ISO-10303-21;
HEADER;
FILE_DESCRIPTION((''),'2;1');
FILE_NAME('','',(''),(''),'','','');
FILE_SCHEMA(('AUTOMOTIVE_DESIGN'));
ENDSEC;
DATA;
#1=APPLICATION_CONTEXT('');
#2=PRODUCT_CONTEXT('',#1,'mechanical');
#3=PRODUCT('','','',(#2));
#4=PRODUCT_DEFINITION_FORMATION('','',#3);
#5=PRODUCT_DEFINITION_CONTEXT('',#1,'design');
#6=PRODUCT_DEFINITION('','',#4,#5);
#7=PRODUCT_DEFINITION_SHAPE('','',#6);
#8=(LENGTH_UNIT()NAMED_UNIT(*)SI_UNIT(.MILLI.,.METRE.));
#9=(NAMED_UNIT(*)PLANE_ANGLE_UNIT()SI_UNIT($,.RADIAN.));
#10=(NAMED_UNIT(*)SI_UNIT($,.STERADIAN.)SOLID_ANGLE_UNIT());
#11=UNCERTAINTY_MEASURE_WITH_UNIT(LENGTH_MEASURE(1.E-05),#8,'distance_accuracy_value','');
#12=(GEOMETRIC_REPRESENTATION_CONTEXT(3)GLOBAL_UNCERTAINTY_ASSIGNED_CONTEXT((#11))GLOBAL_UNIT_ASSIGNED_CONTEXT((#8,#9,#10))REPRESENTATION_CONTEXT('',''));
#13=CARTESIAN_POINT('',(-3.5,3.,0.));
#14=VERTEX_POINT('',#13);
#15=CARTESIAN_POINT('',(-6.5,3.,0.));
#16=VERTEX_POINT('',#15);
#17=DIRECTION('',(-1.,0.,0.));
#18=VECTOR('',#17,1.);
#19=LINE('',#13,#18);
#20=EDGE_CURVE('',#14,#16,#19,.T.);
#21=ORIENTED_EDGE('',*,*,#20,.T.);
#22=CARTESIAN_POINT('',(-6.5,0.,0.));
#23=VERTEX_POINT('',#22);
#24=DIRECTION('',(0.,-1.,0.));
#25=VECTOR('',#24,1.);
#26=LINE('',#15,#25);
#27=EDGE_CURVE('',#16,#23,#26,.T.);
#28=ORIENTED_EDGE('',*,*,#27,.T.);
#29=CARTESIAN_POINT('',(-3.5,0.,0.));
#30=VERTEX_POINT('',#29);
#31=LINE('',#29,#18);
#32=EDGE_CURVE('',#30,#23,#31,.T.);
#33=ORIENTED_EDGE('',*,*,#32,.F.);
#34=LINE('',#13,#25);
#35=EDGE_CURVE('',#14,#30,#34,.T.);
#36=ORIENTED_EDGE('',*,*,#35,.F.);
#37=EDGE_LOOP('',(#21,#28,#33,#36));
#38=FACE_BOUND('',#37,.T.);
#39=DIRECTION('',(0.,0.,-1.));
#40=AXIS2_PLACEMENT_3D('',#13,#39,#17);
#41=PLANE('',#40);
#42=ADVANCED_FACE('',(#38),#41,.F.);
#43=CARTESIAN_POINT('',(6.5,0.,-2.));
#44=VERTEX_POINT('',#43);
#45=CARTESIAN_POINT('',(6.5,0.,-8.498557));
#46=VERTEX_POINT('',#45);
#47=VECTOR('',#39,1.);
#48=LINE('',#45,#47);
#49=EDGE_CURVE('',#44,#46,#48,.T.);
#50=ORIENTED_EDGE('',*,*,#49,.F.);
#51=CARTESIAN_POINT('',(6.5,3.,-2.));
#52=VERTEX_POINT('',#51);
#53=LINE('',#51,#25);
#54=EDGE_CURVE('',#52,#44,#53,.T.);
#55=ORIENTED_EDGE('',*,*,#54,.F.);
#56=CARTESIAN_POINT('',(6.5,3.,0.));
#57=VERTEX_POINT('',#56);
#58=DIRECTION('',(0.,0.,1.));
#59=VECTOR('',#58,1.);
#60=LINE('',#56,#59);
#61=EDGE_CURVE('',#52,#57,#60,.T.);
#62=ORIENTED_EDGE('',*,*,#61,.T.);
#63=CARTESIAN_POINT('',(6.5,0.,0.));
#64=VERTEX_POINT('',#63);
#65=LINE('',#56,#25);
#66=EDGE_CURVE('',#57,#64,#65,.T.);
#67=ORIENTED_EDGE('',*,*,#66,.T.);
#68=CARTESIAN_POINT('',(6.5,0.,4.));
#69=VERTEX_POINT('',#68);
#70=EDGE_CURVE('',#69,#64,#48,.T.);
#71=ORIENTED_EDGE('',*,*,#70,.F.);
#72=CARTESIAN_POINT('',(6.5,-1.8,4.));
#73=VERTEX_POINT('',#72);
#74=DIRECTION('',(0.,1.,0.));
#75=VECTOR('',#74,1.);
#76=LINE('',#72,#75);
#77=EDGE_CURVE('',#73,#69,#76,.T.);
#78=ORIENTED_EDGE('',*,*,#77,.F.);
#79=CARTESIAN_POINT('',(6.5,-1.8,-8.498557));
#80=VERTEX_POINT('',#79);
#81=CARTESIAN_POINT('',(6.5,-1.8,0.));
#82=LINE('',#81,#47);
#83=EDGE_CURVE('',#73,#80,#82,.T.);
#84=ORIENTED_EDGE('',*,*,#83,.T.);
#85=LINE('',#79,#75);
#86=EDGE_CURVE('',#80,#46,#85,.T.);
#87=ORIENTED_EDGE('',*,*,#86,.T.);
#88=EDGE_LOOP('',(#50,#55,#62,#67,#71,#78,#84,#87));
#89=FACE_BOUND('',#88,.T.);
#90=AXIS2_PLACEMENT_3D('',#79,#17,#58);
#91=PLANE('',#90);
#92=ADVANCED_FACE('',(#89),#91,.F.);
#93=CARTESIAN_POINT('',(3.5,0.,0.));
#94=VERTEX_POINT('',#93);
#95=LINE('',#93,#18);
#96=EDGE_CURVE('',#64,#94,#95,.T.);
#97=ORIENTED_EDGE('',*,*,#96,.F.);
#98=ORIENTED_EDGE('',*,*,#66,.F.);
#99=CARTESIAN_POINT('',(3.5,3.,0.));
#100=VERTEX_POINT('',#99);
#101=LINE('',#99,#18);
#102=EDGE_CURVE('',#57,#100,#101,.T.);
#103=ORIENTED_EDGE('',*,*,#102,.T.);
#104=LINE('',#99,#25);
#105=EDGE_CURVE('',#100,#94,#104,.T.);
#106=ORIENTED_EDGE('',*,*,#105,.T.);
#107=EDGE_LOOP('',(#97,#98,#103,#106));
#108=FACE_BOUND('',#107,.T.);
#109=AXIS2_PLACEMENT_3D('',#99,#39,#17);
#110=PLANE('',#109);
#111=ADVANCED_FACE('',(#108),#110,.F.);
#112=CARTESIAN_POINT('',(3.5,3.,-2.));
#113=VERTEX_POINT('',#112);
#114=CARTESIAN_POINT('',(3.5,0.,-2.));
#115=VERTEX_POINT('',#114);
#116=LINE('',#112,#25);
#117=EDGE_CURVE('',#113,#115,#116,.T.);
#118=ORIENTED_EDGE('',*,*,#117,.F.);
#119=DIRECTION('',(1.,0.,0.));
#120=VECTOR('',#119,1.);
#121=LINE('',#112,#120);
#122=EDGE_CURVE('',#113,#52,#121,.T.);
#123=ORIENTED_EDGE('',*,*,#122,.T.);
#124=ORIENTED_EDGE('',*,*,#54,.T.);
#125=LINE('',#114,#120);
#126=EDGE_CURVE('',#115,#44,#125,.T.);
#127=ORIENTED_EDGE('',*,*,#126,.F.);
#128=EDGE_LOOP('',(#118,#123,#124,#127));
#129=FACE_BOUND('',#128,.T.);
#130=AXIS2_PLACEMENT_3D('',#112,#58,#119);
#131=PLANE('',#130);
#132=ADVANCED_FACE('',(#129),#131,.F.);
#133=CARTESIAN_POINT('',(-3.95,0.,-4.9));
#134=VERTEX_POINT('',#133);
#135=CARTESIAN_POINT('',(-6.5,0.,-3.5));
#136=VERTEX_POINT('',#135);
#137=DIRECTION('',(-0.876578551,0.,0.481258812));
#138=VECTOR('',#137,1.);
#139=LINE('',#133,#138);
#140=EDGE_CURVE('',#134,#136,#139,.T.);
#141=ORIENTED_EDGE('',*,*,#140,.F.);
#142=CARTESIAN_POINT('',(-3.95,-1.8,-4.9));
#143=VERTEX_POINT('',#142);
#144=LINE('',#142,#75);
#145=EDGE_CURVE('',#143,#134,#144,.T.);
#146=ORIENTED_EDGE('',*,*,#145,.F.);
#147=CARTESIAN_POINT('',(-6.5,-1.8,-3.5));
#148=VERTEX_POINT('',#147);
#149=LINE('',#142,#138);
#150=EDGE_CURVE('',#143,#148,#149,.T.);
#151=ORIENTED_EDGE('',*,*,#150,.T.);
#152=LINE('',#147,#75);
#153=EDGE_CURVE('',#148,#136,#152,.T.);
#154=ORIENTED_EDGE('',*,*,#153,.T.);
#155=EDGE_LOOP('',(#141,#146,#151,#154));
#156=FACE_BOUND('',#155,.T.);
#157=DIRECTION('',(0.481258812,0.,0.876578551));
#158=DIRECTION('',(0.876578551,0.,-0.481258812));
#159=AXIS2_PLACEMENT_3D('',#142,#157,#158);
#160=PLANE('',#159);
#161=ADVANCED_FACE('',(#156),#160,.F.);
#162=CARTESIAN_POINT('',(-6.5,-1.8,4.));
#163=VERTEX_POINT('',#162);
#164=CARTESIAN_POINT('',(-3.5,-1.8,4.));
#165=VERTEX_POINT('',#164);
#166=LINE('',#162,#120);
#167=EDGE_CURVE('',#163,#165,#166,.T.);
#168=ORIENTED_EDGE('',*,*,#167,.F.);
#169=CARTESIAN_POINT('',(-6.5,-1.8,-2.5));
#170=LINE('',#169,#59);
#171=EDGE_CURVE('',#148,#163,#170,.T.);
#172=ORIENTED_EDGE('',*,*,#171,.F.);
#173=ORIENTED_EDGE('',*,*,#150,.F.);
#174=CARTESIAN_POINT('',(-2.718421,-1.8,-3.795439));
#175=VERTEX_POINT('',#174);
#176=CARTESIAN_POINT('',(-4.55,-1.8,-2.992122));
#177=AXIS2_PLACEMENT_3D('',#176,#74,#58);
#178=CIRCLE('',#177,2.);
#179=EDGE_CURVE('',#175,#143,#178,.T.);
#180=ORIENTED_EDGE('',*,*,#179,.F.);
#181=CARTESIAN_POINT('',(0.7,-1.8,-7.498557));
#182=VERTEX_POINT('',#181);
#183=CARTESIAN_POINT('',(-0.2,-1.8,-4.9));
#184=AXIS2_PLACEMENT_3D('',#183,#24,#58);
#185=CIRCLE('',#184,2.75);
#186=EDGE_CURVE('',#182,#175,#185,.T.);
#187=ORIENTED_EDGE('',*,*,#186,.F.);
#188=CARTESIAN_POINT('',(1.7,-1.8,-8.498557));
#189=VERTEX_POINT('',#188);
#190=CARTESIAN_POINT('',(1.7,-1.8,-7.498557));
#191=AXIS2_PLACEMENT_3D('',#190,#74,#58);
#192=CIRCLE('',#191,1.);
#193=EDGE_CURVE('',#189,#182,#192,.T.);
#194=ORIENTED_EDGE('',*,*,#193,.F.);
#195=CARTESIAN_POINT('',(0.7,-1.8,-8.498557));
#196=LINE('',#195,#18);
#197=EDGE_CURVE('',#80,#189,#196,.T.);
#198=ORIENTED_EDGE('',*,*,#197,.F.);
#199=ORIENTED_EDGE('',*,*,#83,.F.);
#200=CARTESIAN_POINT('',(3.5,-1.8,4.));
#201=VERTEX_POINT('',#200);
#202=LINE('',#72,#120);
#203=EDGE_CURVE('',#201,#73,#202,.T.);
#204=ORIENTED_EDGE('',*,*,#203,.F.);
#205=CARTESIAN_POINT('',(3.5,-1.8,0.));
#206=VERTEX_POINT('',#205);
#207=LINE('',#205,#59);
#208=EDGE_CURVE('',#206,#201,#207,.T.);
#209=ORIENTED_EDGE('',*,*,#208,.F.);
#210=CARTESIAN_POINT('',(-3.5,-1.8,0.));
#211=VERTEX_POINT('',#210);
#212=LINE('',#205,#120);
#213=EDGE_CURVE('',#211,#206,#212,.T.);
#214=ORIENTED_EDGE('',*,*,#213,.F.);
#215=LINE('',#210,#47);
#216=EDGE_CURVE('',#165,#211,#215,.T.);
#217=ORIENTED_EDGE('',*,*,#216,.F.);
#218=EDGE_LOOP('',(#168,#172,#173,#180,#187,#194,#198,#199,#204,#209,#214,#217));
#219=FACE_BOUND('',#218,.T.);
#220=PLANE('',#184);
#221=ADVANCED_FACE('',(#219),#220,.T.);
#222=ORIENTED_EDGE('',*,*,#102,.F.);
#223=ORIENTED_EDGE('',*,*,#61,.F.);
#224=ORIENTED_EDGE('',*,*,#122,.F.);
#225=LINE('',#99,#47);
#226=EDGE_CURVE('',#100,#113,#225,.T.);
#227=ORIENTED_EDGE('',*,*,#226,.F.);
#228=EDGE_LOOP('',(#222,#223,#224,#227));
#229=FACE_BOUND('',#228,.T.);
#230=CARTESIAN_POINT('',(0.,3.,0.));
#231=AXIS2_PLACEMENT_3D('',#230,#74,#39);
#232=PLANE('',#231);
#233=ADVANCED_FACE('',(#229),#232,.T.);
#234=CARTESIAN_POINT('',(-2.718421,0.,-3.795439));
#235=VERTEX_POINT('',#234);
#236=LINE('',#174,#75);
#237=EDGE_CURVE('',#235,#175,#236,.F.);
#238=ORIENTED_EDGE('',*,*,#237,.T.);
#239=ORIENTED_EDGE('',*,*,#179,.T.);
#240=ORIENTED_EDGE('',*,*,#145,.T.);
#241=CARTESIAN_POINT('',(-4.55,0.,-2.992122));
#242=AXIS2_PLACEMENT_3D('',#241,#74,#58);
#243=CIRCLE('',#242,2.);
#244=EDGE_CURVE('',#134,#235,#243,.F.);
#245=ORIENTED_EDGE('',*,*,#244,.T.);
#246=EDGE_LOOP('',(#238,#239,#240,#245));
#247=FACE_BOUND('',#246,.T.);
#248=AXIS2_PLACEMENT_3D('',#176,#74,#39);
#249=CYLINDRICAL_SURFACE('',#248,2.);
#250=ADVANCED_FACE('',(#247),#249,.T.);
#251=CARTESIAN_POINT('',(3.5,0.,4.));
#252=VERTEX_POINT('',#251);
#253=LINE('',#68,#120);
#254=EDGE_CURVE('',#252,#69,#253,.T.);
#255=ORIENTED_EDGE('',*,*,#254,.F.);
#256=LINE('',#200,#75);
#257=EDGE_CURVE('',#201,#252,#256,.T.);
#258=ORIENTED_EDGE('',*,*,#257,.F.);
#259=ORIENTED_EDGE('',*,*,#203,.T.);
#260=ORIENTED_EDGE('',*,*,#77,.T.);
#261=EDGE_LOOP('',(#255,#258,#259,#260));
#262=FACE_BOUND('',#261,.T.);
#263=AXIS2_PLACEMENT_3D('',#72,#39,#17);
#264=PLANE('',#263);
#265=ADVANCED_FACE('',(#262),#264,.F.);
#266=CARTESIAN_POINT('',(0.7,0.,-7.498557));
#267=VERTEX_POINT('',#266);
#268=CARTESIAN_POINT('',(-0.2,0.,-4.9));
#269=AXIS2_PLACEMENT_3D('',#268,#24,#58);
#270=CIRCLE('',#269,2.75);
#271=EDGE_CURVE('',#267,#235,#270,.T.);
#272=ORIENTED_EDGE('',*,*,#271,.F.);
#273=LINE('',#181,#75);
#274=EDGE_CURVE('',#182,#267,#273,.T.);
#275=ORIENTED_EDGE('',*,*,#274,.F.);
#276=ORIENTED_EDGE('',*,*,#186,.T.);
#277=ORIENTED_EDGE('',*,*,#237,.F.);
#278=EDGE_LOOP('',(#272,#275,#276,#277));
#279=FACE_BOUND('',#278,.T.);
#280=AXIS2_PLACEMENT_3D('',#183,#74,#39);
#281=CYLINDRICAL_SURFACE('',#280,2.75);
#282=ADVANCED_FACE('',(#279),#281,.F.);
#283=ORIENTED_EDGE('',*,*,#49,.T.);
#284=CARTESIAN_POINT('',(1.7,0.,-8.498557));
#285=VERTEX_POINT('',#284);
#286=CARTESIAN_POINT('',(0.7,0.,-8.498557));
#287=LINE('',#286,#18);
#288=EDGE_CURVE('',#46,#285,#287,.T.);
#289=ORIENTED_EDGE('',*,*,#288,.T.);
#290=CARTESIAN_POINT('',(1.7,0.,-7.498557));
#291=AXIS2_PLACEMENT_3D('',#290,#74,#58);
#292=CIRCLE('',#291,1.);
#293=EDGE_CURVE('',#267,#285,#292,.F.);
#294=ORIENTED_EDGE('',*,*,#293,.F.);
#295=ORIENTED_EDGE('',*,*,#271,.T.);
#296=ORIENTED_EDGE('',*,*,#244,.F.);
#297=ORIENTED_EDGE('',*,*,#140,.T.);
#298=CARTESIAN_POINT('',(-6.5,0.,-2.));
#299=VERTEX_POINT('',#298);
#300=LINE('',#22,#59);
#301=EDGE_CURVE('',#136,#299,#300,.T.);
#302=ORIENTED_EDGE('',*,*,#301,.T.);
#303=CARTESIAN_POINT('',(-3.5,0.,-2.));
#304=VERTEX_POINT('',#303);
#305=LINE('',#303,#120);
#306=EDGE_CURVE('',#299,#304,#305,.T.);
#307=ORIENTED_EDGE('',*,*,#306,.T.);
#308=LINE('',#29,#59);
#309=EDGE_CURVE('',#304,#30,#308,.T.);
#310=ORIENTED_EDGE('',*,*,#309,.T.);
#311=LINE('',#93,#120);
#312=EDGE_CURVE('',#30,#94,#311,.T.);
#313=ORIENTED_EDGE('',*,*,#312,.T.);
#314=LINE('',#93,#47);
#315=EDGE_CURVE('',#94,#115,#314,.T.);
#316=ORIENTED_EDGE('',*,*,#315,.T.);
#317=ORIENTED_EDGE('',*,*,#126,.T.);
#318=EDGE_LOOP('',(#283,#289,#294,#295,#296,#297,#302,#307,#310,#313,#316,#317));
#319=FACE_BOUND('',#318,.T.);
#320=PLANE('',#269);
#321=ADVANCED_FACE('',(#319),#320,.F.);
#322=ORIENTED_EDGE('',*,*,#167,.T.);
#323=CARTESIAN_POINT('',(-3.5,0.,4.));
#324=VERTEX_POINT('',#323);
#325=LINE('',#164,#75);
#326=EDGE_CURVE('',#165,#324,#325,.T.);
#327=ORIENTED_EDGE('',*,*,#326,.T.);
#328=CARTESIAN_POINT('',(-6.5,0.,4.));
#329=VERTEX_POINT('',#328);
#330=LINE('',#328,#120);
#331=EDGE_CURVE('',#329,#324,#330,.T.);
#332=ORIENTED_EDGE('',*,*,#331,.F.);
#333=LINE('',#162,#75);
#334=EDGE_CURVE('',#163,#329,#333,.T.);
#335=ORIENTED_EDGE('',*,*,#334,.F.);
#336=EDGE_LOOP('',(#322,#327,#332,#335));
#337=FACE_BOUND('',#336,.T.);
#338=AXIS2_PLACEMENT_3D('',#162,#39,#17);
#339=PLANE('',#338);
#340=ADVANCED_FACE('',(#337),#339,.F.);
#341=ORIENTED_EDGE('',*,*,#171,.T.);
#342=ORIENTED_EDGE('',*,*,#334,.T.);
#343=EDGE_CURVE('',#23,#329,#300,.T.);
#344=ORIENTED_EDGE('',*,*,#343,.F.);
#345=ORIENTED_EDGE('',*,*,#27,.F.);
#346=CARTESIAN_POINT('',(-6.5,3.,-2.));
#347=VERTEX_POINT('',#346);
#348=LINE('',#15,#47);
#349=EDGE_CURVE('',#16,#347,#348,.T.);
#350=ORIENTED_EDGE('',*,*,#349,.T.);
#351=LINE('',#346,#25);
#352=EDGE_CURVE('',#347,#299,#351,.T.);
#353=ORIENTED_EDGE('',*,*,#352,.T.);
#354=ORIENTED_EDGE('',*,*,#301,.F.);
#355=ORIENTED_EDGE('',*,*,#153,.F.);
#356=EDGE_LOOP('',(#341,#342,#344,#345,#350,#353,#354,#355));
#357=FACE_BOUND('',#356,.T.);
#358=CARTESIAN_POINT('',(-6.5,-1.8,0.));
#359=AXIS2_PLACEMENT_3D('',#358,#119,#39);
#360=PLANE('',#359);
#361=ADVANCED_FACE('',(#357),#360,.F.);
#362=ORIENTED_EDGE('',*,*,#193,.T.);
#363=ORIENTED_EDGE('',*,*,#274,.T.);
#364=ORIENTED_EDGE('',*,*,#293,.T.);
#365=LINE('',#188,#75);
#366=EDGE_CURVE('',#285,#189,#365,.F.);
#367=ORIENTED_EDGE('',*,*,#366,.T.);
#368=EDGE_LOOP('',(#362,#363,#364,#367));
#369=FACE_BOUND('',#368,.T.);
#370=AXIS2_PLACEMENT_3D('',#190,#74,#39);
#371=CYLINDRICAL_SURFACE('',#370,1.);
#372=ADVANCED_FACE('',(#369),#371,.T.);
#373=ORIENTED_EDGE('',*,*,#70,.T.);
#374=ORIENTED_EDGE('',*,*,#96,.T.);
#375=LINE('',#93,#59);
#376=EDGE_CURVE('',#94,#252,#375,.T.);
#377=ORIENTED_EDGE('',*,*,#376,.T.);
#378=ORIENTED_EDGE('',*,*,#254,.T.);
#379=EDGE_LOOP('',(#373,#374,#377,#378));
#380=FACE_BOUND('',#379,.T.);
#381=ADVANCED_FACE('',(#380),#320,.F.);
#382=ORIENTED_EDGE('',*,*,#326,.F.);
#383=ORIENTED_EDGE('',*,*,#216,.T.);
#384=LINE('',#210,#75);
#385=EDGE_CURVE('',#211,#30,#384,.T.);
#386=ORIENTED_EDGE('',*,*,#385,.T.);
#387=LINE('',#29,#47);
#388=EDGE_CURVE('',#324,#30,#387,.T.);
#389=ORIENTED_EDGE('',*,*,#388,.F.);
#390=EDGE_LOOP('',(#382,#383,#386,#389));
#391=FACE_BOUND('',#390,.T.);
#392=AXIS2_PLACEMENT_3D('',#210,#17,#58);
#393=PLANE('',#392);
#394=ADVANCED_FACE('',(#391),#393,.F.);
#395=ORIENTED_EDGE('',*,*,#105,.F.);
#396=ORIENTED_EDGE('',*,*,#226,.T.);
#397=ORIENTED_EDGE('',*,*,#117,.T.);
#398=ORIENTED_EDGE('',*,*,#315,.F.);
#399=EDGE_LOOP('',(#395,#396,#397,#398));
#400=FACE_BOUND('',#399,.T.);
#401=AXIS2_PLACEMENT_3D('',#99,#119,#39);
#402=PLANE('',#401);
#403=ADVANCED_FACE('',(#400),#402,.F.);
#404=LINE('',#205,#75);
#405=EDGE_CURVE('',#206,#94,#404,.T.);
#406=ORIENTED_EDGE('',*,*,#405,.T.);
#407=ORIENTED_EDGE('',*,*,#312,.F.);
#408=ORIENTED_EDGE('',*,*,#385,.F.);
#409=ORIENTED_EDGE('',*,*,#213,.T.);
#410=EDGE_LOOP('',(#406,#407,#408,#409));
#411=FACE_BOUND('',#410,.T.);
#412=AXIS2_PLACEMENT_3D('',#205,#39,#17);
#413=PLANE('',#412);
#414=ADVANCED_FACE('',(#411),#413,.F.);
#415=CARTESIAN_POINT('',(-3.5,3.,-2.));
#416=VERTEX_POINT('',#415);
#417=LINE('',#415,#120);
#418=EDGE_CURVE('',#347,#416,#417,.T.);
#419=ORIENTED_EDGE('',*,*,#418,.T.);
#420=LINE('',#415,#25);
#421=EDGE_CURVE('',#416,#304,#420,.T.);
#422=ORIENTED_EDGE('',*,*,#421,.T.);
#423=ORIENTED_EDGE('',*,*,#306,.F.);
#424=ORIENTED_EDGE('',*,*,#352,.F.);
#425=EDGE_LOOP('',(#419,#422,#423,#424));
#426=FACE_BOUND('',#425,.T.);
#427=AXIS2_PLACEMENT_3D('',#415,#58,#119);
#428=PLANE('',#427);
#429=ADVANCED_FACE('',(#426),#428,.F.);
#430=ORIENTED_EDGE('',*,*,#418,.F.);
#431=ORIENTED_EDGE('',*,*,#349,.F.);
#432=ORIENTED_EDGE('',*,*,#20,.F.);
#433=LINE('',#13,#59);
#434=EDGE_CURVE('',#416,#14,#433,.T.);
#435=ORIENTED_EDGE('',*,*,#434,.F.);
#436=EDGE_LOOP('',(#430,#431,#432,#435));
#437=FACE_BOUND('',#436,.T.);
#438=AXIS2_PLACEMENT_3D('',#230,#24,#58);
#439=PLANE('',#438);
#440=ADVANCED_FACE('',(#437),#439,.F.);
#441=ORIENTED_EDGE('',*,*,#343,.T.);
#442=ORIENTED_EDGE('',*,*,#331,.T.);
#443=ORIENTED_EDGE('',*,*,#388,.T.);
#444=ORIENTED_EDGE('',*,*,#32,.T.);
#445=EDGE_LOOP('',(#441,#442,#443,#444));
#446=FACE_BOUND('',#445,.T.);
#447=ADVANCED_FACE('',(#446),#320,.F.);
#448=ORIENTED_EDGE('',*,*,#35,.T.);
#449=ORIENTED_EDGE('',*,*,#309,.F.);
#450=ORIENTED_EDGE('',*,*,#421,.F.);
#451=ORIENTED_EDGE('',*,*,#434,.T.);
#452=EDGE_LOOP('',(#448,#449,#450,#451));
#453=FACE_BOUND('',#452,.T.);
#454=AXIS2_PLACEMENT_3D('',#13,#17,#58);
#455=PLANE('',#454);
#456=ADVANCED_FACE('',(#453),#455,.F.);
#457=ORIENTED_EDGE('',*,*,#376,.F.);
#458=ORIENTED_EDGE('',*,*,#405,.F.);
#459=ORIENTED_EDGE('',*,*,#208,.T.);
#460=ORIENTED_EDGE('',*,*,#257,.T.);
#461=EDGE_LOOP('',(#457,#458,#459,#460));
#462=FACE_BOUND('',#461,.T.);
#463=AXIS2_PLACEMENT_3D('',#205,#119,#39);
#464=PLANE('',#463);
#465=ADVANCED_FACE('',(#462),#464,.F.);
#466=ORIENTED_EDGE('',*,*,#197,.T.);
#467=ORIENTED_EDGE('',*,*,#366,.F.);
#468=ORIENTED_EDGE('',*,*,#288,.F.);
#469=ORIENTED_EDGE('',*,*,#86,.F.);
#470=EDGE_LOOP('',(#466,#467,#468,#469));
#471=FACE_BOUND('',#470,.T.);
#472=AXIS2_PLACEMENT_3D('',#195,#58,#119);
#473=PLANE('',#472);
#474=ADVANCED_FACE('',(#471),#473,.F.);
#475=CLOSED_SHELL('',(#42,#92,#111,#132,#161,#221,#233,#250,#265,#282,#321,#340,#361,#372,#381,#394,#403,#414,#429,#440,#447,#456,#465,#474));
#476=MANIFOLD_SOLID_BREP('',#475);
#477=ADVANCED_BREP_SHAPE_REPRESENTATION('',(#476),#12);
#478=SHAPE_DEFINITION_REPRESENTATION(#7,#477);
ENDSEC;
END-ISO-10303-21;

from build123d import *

# Parameters (mm, degrees)
BOSS_EXTRUDE1_DEPTH = 1.8
FILLET1_R           = 2
FILLET3_R           = 1
SKETCH2_W           = 3
SKETCH2_H           = 2
BOSS_EXTRUDE2_DEPTH = 3


# Some blends are built 0.0001 mm under size
with BuildPart() as part:
    # Sketch1 → Boss-Extrude1 (new body)
    with BuildSketch(Plane(origin=(0, 0, 0), x_dir=(1, 0, 0), z_dir=(0, 1, 0))):
        with BuildLine():
            Line((6.5, 2.5), (6.5, 0))
            Line((6.5, 0), (6.5, -4))
            Line((6.5, -4), (3.5, -4))
            Line((3.5, -4), (3.5, 0))
            Line((3.5, 0), (-3.5, 0))
            Line((-3.5, 0), (-3.5, -4))
            Line((-3.5, -4), (-6.5, -4))
            Line((-6.5, -4), (-6.5, 0))
            Line((-6.5, 0), (-6.5, 2.5))
            Line((-6.5, 2.5), (-6.5, 3.5))
            Line((-6.5, 3.5), (-3.95, 4.9))
            Line((-3.95, 4.9), (-2.95, 4.9))
            ThreePointArc((-2.95, 4.9), (-0.2, 2.15), (2.55, 4.9))
            ThreePointArc((2.55, 4.9), (2.040256682, 6.494913791), (0.7, 7.498557292))
            Line((0.7, 7.498557292), (0.7, 8.498557292))
            Line((0.7, 8.498557292), (6.5, 8.498557292))
            Line((6.5, 8.498557292), (6.5, 4.9))
            Line((6.5, 4.9), (6.5, 2.5))
        make_face()
    extrude(amount=BOSS_EXTRUDE1_DEPTH)

    # Fillet1
    # the kernel refuses this fillet: 2 mm, written as the material it takes off along each edge
    with BuildSketch(Plane(origin=(-2.95, -2.821440468, -4.9), x_dir=(0.20519567041703107, 0, 0.9787209698591857), z_dir=(0, 1, 0))) as fillet1_piece_1:
        with BuildLine():
            CenterArc((1.538967528, -1.95744194), FILLET1_R, 101.840953646, 48.860489585)
            Line((-0.20519567, -0.97872097), (-0.240078934, -0.95914655))
            ThreePointArc((-0.240078934, -0.95914655), (-0.141746674, -0.481152658), (-0.039148839, 0.008207827))
            Line((-0.039148839, 0.008207827), (0.008207827, 0.039148839))
            ThreePointArc((0.008207827, 0.039148839), (0.564288094, -0.018517333), (1.12036836, 0.039148839))
            Line((1.12036836, 0.039148839), (1.128576187, 0))
        make_face()
    extrude(amount=7.442880936, mode=Mode.SUBTRACT)

    # Fillet3
    fillet3_edges = [part.edges().sort_by_distance(p)[0] for p in [
        (0.7, 0.9, -8.498557292),
    ]]
    fillet(fillet3_edges, radius=FILLET3_R - 0.0001)  # a hair under: the kernel refuses the full size

    # Sketch2 → Boss-Extrude2 (add)
    with BuildSketch(Plane.XZ):
        with Locations((5, -1)):
            Rectangle(SKETCH2_W, SKETCH2_H)
        with Locations((-5, -1)):
            Rectangle(SKETCH2_W, SKETCH2_H)
    extrude(amount=BOSS_EXTRUDE2_DEPTH)


with BuildPart() as body_2:
    # Mirror3: mirrored copy
    add(part.part.mirror(Plane(origin=(0, 0, 0), x_dir=(0, 0, 1), z_dir=(0, -1, 0))))


solid = body_2.part
